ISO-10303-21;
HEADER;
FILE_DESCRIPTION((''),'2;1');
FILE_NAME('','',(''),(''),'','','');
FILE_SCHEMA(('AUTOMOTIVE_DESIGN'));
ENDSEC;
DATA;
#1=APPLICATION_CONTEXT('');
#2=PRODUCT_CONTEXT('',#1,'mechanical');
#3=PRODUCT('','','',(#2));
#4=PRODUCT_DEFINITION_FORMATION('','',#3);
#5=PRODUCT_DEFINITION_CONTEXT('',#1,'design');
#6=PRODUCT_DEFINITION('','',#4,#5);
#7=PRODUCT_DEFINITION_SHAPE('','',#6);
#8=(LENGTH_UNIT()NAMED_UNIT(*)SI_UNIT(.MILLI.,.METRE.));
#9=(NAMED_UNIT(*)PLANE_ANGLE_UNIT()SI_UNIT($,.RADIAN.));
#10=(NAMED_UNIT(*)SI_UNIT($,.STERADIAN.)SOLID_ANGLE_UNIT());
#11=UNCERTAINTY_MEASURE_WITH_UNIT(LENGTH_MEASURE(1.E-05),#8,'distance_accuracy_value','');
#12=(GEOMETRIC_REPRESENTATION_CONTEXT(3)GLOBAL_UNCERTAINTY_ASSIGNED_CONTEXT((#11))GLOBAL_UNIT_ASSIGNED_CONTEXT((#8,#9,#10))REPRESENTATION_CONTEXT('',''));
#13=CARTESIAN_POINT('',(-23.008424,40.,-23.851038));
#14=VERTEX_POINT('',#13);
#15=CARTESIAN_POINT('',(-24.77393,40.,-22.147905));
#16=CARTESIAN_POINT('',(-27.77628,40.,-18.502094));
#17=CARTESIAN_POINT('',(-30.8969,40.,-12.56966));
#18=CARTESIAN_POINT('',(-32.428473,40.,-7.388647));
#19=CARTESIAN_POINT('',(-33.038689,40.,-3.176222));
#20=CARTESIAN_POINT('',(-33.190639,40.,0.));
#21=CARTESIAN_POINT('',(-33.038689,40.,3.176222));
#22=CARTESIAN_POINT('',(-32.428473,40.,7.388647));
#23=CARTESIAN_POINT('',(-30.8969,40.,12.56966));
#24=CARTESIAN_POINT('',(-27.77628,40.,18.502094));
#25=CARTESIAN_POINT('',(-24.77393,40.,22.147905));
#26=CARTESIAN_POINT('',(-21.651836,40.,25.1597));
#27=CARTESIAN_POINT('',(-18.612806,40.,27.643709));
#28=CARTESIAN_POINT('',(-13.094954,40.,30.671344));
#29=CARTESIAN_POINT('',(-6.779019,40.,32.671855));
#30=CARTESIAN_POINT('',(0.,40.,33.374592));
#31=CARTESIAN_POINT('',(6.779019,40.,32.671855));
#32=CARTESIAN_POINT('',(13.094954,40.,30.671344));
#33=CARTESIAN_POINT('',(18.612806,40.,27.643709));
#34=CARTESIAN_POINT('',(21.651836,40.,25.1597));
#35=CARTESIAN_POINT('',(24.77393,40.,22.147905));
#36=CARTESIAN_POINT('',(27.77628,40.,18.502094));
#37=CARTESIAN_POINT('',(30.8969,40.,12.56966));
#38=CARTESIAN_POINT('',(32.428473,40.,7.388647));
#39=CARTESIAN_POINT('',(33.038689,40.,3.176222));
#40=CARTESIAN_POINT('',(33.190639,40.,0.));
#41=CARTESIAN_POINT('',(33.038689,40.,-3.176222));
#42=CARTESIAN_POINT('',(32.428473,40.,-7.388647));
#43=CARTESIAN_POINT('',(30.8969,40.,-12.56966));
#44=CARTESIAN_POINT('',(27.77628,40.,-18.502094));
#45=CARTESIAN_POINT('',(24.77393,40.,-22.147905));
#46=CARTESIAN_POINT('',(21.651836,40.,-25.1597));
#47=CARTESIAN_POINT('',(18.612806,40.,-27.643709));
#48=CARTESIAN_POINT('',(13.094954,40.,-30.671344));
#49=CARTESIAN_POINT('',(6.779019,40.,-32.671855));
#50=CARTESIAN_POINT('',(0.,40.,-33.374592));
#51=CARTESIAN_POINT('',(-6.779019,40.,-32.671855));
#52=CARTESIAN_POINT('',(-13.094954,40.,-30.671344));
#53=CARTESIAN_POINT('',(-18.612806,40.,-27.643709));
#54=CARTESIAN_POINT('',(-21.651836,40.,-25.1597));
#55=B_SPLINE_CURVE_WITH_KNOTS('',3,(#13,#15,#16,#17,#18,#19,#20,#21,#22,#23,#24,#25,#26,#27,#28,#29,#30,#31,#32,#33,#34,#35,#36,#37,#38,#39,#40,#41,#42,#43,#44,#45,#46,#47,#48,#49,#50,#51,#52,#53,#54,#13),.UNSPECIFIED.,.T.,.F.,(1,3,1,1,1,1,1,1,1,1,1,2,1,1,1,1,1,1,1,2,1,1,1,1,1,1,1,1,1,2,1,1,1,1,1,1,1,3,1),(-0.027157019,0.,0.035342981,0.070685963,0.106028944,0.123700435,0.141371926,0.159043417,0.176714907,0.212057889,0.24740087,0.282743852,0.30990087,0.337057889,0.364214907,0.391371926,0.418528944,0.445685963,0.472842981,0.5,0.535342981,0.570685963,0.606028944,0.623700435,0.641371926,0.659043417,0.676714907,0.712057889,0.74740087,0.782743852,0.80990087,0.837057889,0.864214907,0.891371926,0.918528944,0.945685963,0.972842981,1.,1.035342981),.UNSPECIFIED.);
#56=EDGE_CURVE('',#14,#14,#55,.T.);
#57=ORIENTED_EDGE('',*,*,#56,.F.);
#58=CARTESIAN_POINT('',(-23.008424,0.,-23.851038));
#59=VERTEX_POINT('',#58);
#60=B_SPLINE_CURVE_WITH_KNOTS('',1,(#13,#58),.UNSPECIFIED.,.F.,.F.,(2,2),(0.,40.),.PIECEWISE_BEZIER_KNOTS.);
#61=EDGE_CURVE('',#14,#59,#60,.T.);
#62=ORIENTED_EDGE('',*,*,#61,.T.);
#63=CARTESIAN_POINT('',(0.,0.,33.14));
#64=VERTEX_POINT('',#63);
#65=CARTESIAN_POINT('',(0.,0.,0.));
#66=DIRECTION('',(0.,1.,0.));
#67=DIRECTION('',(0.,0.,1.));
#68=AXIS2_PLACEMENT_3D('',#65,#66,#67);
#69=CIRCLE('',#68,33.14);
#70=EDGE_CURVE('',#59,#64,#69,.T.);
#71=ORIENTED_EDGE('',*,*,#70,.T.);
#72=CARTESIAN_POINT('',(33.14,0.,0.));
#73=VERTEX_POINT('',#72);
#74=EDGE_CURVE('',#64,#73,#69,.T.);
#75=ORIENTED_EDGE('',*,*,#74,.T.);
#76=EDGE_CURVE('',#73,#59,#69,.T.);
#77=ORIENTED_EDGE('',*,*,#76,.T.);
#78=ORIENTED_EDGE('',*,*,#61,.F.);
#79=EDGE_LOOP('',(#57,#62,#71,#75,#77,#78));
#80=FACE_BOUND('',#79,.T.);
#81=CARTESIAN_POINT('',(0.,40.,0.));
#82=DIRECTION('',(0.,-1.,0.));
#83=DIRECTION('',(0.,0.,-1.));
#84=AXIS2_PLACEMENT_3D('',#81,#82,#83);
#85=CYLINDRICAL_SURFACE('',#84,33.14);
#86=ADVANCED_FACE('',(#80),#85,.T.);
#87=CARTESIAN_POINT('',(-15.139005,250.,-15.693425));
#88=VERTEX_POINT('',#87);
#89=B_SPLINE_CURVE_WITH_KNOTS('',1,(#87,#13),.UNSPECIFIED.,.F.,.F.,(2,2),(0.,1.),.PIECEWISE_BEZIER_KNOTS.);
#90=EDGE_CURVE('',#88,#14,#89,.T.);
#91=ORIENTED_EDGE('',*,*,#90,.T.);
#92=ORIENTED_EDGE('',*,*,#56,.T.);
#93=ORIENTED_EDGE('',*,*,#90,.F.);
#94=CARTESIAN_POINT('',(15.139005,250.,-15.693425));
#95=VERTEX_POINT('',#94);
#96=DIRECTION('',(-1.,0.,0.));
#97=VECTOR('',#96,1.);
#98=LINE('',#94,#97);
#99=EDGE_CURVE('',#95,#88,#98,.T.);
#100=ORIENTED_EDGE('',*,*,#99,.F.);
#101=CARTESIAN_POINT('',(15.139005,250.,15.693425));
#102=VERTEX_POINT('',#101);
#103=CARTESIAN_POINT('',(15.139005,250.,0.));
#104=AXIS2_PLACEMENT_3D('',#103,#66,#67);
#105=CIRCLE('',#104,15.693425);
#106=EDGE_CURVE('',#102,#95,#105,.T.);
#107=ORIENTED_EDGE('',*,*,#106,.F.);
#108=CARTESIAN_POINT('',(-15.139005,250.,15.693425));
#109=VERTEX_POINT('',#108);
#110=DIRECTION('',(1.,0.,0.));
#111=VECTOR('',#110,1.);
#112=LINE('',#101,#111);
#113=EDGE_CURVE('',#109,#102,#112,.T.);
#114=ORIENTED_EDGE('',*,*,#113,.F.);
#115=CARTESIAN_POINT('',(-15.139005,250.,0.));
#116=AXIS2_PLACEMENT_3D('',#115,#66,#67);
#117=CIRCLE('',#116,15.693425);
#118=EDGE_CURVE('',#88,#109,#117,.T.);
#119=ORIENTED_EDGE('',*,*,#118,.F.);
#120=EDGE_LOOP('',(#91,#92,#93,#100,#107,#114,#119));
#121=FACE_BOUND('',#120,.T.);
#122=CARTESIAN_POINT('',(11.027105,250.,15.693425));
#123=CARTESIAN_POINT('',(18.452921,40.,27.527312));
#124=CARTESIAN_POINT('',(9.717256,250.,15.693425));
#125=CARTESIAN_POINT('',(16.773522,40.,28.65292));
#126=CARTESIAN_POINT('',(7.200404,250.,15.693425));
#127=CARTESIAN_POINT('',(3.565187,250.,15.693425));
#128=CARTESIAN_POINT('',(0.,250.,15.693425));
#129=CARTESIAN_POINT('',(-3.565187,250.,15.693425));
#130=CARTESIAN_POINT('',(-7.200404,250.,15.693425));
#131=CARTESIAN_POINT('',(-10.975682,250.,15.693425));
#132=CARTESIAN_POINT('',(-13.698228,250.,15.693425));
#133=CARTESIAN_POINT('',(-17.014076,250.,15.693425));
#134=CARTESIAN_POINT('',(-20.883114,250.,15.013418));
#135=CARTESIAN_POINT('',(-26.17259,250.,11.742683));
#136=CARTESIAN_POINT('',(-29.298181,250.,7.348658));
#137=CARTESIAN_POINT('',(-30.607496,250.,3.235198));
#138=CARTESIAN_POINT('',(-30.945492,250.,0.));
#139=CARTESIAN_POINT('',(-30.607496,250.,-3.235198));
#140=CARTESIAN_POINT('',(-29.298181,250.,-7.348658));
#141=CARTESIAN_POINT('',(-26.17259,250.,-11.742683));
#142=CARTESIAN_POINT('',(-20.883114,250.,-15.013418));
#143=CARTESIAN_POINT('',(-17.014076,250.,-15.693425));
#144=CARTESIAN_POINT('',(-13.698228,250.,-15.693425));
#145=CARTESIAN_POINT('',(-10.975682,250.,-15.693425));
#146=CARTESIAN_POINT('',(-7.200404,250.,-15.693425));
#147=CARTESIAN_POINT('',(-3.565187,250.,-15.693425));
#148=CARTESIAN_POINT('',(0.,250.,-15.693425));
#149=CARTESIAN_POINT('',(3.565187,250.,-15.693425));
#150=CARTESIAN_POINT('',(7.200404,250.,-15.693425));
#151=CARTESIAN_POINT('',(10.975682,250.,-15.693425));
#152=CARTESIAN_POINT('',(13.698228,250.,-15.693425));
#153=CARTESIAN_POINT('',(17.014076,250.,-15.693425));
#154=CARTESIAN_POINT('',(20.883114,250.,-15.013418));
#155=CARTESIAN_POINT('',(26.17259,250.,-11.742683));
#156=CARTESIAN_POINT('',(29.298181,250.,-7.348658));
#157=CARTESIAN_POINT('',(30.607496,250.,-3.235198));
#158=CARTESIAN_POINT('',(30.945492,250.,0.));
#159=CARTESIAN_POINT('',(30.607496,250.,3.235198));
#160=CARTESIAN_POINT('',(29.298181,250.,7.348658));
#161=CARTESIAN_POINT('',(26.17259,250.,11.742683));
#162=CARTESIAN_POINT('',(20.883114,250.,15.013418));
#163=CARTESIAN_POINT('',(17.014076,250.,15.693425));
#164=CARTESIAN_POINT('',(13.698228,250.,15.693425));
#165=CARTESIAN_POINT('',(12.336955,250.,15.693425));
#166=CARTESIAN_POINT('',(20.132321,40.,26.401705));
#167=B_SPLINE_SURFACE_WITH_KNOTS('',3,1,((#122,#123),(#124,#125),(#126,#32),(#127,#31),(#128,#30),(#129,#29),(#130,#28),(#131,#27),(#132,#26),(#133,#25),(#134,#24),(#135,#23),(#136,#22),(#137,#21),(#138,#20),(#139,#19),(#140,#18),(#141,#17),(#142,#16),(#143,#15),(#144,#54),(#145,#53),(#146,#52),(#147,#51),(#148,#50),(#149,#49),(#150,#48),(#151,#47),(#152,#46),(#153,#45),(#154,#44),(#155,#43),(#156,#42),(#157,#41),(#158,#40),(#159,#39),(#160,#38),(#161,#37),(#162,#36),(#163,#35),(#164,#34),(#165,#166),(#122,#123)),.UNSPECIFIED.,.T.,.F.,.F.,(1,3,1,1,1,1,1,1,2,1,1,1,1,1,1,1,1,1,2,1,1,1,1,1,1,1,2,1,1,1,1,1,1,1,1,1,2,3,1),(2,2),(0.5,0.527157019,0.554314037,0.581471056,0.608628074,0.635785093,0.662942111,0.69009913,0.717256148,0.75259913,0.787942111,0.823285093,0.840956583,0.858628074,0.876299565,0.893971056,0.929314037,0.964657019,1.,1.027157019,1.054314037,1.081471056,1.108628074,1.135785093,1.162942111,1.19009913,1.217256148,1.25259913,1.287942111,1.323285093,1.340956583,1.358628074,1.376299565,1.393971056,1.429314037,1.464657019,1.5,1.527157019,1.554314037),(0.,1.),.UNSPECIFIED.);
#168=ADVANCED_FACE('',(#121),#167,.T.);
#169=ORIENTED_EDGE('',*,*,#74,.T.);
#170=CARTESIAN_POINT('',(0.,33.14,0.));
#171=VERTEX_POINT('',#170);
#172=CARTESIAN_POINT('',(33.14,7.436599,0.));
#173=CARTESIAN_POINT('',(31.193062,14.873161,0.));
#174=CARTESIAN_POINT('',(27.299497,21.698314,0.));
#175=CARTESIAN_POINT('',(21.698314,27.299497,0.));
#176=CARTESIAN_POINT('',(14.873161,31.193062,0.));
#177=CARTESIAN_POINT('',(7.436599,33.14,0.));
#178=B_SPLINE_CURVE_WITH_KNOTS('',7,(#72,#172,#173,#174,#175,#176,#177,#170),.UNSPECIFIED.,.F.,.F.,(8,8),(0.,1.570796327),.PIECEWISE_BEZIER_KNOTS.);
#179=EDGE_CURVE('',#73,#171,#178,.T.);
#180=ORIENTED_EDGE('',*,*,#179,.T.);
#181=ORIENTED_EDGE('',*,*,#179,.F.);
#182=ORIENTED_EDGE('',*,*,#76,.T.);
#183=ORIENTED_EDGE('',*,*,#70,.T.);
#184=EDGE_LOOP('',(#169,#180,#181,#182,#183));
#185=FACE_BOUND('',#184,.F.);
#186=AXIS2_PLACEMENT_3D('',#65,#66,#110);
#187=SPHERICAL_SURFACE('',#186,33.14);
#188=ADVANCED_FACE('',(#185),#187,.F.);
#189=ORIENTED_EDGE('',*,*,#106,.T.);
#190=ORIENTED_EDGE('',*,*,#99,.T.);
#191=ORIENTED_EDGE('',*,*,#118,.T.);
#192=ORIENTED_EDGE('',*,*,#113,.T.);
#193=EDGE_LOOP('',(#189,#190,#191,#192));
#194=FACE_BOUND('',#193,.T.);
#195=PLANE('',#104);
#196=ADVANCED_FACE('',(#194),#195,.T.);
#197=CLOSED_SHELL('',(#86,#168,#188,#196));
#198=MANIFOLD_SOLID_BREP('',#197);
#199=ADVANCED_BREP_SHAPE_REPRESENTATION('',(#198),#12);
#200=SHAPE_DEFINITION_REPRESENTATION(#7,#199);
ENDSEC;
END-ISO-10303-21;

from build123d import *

# Parameters (mm, degrees)
SKETCH1_R           = 33.14
BOSS_EXTRUDE7_DEPTH = 40


with BuildPart() as part:
    # Sketch1 → Boss-Extrude7 (new body)
    with BuildSketch(Plane(origin=(0, 0, 0), x_dir=(1, 0, 0), z_dir=(0, 1, 0))):
        with Locations(Location((0, 0, 0), (0, 0, 270))):
            Circle(SKETCH1_R)
    extrude(amount=BOSS_EXTRUDE7_DEPTH)

    # Sketch2 → Cut-Revolve1 (revolve, cut)
    with BuildSketch(Plane.XY):
        with BuildLine():
            Line((0, 33.14), (0, 0))
            Line((0, 0), (33.14, 0))
            ThreePointArc((33.14, 0), (23.433518729, 23.433518729), (0, 33.14))
        make_face()
    revolve(axis=Axis((0, 33.14, 0), (0, -1, 0)), mode=Mode.SUBTRACT)

    # Loft2: read off the stored shape, not the designer's step
    # Loft2: loft between two sections, ruled curve by curve
    loft2_from = [
        Edge.make_bspline([(11.0271054, 250, 15.693425337), (9.717255887, 250, 15.693425337), (7.200404048, 250, 15.693425337), (3.565186877, 250, 15.693425337), (0, 250, 15.693425337), (-3.565186877, 250, 15.693425337), (-7.200404048, 250, 15.693425337), (-10.975681806, 250, 15.693425337), (-13.698228021, 250, 15.693425337), (-17.01407632, 250, 15.693425337), (-20.883114432, 250, 15.013417832), (-26.17258951, 250, 11.742683375), (-29.298181468, 250, 7.348658434), (-30.607496373, 250, 3.235198337), (-30.945491545, 250, 0), (-30.607496373, 250, -3.235198337), (-29.298181468, 250, -7.348658434), (-26.17258951, 250, -11.742683375), (-20.883114432, 250, -15.013417832), (-17.01407632, 250, -15.693425337), (-13.698228021, 250, -15.693425337), (-10.975681806, 250, -15.693425337), (-7.200404048, 250, -15.693425337), (-3.565186877, 250, -15.693425337), (0, 250, -15.693425337), (3.565186877, 250, -15.693425337), (7.200404048, 250, -15.693425337), (10.975681806, 250, -15.693425337), (13.698228021, 250, -15.693425337), (17.01407632, 250, -15.693425337), (20.883114432, 250, -15.013417832), (26.17258951, 250, -11.742683375), (29.298181468, 250, -7.348658434), (30.607496373, 250, -3.235198337), (30.945491545, 250, 0), (30.607496373, 250, 3.235198337), (29.298181468, 250, 7.348658434), (26.17258951, 250, 11.742683375), (20.883114432, 250, 15.013417832), (17.01407632, 250, 15.693425337), (13.698228021, 250, 15.693425337), (12.336954914, 250, 15.693425337), (11.0271054, 250, 15.693425337)], [0.527157019, 0.527157019, 0.527157019, 0.527157019, 0.554314037, 0.581471056, 0.608628074, 0.635785093, 0.662942111, 0.69009913, 0.717256148, 0.717256148, 0.75259913, 0.787942111, 0.823285093, 0.840956583, 0.858628074, 0.876299565, 0.893971056, 0.929314037, 0.964657019, 1, 1, 1.027157019, 1.054314037, 1.081471056, 1.108628074, 1.135785093, 1.162942111, 1.19009913, 1.217256148, 1.217256148, 1.25259913, 1.287942111, 1.323285093, 1.340956583, 1.358628074, 1.376299565, 1.393971056, 1.429314037, 1.464657019, 1.5, 1.5, 1.527157019, 1.527157019, 1.527157019, 1.527157019], 3),
    ]
    loft2_to = [
        Edge.make_bspline([(18.452921353, 40, 27.527312367), (16.773521911, 40, 28.65292023), (13.094954469, 40, 30.671343614), (6.779019435, 40, 32.671854648), (0, 40, 33.37459225), (-6.779019435, 40, 32.671854648), (-13.094954469, 40, 30.671343614), (-18.612805633, 40, 27.643708538), (-21.651835957, 40, 25.159700469), (-24.773929538, 40, 22.14790483), (-27.776279888, 40, 18.502093583), (-30.896900485, 40, 12.569660246), (-32.428473357, 40, 7.38864691), (-33.038688921, 40, 3.176222121), (-33.190639416, 40, 0), (-33.038688921, 40, -3.176222121), (-32.428473357, 40, -7.38864691), (-30.896900485, 40, -12.569660246), (-27.776279888, 40, -18.502093583), (-24.773929538, 40, -22.14790483), (-21.651835957, 40, -25.159700469), (-18.612805633, 40, -27.643708538), (-13.094954469, 40, -30.671343614), (-6.779019435, 40, -32.671854648), (0, 40, -33.37459225), (6.779019435, 40, -32.671854648), (13.094954469, 40, -30.671343614), (18.612805633, 40, -27.643708538), (21.651835957, 40, -25.159700469), (24.773929538, 40, -22.14790483), (27.776279888, 40, -18.502093583), (30.896900485, 40, -12.569660246), (32.428473357, 40, -7.38864691), (33.038688921, 40, -3.176222121), (33.190639416, 40, 0), (33.038688921, 40, 3.176222121), (32.428473357, 40, 7.38864691), (30.896900485, 40, 12.569660246), (27.776279888, 40, 18.502093583), (24.773929538, 40, 22.14790483), (21.651835957, 40, 25.159700469), (20.132320795, 40, 26.401704504), (18.452921353, 40, 27.527312367)], [0.527157019, 0.527157019, 0.527157019, 0.527157019, 0.554314037, 0.581471056, 0.608628074, 0.635785093, 0.662942111, 0.69009913, 0.717256148, 0.717256148, 0.75259913, 0.787942111, 0.823285093, 0.840956583, 0.858628074, 0.876299565, 0.893971056, 0.929314037, 0.964657019, 1, 1, 1.027157019, 1.054314037, 1.081471056, 1.108628074, 1.135785093, 1.162942111, 1.19009913, 1.217256148, 1.217256148, 1.25259913, 1.287942111, 1.323285093, 1.340956583, 1.358628074, 1.376299565, 1.393971056, 1.429314037, 1.464657019, 1.5, 1.5, 1.527157019, 1.527157019, 1.527157019, 1.527157019], 3),
    ]
    loft2 = Solid(Shell([*[Face.make_surface_from_curves(loft2_from[k], loft2_to[k]) for k in range(1)], Face(Wire(loft2_from)), Face(Wire(loft2_to))]))
    add(loft2)


solid = part.part
